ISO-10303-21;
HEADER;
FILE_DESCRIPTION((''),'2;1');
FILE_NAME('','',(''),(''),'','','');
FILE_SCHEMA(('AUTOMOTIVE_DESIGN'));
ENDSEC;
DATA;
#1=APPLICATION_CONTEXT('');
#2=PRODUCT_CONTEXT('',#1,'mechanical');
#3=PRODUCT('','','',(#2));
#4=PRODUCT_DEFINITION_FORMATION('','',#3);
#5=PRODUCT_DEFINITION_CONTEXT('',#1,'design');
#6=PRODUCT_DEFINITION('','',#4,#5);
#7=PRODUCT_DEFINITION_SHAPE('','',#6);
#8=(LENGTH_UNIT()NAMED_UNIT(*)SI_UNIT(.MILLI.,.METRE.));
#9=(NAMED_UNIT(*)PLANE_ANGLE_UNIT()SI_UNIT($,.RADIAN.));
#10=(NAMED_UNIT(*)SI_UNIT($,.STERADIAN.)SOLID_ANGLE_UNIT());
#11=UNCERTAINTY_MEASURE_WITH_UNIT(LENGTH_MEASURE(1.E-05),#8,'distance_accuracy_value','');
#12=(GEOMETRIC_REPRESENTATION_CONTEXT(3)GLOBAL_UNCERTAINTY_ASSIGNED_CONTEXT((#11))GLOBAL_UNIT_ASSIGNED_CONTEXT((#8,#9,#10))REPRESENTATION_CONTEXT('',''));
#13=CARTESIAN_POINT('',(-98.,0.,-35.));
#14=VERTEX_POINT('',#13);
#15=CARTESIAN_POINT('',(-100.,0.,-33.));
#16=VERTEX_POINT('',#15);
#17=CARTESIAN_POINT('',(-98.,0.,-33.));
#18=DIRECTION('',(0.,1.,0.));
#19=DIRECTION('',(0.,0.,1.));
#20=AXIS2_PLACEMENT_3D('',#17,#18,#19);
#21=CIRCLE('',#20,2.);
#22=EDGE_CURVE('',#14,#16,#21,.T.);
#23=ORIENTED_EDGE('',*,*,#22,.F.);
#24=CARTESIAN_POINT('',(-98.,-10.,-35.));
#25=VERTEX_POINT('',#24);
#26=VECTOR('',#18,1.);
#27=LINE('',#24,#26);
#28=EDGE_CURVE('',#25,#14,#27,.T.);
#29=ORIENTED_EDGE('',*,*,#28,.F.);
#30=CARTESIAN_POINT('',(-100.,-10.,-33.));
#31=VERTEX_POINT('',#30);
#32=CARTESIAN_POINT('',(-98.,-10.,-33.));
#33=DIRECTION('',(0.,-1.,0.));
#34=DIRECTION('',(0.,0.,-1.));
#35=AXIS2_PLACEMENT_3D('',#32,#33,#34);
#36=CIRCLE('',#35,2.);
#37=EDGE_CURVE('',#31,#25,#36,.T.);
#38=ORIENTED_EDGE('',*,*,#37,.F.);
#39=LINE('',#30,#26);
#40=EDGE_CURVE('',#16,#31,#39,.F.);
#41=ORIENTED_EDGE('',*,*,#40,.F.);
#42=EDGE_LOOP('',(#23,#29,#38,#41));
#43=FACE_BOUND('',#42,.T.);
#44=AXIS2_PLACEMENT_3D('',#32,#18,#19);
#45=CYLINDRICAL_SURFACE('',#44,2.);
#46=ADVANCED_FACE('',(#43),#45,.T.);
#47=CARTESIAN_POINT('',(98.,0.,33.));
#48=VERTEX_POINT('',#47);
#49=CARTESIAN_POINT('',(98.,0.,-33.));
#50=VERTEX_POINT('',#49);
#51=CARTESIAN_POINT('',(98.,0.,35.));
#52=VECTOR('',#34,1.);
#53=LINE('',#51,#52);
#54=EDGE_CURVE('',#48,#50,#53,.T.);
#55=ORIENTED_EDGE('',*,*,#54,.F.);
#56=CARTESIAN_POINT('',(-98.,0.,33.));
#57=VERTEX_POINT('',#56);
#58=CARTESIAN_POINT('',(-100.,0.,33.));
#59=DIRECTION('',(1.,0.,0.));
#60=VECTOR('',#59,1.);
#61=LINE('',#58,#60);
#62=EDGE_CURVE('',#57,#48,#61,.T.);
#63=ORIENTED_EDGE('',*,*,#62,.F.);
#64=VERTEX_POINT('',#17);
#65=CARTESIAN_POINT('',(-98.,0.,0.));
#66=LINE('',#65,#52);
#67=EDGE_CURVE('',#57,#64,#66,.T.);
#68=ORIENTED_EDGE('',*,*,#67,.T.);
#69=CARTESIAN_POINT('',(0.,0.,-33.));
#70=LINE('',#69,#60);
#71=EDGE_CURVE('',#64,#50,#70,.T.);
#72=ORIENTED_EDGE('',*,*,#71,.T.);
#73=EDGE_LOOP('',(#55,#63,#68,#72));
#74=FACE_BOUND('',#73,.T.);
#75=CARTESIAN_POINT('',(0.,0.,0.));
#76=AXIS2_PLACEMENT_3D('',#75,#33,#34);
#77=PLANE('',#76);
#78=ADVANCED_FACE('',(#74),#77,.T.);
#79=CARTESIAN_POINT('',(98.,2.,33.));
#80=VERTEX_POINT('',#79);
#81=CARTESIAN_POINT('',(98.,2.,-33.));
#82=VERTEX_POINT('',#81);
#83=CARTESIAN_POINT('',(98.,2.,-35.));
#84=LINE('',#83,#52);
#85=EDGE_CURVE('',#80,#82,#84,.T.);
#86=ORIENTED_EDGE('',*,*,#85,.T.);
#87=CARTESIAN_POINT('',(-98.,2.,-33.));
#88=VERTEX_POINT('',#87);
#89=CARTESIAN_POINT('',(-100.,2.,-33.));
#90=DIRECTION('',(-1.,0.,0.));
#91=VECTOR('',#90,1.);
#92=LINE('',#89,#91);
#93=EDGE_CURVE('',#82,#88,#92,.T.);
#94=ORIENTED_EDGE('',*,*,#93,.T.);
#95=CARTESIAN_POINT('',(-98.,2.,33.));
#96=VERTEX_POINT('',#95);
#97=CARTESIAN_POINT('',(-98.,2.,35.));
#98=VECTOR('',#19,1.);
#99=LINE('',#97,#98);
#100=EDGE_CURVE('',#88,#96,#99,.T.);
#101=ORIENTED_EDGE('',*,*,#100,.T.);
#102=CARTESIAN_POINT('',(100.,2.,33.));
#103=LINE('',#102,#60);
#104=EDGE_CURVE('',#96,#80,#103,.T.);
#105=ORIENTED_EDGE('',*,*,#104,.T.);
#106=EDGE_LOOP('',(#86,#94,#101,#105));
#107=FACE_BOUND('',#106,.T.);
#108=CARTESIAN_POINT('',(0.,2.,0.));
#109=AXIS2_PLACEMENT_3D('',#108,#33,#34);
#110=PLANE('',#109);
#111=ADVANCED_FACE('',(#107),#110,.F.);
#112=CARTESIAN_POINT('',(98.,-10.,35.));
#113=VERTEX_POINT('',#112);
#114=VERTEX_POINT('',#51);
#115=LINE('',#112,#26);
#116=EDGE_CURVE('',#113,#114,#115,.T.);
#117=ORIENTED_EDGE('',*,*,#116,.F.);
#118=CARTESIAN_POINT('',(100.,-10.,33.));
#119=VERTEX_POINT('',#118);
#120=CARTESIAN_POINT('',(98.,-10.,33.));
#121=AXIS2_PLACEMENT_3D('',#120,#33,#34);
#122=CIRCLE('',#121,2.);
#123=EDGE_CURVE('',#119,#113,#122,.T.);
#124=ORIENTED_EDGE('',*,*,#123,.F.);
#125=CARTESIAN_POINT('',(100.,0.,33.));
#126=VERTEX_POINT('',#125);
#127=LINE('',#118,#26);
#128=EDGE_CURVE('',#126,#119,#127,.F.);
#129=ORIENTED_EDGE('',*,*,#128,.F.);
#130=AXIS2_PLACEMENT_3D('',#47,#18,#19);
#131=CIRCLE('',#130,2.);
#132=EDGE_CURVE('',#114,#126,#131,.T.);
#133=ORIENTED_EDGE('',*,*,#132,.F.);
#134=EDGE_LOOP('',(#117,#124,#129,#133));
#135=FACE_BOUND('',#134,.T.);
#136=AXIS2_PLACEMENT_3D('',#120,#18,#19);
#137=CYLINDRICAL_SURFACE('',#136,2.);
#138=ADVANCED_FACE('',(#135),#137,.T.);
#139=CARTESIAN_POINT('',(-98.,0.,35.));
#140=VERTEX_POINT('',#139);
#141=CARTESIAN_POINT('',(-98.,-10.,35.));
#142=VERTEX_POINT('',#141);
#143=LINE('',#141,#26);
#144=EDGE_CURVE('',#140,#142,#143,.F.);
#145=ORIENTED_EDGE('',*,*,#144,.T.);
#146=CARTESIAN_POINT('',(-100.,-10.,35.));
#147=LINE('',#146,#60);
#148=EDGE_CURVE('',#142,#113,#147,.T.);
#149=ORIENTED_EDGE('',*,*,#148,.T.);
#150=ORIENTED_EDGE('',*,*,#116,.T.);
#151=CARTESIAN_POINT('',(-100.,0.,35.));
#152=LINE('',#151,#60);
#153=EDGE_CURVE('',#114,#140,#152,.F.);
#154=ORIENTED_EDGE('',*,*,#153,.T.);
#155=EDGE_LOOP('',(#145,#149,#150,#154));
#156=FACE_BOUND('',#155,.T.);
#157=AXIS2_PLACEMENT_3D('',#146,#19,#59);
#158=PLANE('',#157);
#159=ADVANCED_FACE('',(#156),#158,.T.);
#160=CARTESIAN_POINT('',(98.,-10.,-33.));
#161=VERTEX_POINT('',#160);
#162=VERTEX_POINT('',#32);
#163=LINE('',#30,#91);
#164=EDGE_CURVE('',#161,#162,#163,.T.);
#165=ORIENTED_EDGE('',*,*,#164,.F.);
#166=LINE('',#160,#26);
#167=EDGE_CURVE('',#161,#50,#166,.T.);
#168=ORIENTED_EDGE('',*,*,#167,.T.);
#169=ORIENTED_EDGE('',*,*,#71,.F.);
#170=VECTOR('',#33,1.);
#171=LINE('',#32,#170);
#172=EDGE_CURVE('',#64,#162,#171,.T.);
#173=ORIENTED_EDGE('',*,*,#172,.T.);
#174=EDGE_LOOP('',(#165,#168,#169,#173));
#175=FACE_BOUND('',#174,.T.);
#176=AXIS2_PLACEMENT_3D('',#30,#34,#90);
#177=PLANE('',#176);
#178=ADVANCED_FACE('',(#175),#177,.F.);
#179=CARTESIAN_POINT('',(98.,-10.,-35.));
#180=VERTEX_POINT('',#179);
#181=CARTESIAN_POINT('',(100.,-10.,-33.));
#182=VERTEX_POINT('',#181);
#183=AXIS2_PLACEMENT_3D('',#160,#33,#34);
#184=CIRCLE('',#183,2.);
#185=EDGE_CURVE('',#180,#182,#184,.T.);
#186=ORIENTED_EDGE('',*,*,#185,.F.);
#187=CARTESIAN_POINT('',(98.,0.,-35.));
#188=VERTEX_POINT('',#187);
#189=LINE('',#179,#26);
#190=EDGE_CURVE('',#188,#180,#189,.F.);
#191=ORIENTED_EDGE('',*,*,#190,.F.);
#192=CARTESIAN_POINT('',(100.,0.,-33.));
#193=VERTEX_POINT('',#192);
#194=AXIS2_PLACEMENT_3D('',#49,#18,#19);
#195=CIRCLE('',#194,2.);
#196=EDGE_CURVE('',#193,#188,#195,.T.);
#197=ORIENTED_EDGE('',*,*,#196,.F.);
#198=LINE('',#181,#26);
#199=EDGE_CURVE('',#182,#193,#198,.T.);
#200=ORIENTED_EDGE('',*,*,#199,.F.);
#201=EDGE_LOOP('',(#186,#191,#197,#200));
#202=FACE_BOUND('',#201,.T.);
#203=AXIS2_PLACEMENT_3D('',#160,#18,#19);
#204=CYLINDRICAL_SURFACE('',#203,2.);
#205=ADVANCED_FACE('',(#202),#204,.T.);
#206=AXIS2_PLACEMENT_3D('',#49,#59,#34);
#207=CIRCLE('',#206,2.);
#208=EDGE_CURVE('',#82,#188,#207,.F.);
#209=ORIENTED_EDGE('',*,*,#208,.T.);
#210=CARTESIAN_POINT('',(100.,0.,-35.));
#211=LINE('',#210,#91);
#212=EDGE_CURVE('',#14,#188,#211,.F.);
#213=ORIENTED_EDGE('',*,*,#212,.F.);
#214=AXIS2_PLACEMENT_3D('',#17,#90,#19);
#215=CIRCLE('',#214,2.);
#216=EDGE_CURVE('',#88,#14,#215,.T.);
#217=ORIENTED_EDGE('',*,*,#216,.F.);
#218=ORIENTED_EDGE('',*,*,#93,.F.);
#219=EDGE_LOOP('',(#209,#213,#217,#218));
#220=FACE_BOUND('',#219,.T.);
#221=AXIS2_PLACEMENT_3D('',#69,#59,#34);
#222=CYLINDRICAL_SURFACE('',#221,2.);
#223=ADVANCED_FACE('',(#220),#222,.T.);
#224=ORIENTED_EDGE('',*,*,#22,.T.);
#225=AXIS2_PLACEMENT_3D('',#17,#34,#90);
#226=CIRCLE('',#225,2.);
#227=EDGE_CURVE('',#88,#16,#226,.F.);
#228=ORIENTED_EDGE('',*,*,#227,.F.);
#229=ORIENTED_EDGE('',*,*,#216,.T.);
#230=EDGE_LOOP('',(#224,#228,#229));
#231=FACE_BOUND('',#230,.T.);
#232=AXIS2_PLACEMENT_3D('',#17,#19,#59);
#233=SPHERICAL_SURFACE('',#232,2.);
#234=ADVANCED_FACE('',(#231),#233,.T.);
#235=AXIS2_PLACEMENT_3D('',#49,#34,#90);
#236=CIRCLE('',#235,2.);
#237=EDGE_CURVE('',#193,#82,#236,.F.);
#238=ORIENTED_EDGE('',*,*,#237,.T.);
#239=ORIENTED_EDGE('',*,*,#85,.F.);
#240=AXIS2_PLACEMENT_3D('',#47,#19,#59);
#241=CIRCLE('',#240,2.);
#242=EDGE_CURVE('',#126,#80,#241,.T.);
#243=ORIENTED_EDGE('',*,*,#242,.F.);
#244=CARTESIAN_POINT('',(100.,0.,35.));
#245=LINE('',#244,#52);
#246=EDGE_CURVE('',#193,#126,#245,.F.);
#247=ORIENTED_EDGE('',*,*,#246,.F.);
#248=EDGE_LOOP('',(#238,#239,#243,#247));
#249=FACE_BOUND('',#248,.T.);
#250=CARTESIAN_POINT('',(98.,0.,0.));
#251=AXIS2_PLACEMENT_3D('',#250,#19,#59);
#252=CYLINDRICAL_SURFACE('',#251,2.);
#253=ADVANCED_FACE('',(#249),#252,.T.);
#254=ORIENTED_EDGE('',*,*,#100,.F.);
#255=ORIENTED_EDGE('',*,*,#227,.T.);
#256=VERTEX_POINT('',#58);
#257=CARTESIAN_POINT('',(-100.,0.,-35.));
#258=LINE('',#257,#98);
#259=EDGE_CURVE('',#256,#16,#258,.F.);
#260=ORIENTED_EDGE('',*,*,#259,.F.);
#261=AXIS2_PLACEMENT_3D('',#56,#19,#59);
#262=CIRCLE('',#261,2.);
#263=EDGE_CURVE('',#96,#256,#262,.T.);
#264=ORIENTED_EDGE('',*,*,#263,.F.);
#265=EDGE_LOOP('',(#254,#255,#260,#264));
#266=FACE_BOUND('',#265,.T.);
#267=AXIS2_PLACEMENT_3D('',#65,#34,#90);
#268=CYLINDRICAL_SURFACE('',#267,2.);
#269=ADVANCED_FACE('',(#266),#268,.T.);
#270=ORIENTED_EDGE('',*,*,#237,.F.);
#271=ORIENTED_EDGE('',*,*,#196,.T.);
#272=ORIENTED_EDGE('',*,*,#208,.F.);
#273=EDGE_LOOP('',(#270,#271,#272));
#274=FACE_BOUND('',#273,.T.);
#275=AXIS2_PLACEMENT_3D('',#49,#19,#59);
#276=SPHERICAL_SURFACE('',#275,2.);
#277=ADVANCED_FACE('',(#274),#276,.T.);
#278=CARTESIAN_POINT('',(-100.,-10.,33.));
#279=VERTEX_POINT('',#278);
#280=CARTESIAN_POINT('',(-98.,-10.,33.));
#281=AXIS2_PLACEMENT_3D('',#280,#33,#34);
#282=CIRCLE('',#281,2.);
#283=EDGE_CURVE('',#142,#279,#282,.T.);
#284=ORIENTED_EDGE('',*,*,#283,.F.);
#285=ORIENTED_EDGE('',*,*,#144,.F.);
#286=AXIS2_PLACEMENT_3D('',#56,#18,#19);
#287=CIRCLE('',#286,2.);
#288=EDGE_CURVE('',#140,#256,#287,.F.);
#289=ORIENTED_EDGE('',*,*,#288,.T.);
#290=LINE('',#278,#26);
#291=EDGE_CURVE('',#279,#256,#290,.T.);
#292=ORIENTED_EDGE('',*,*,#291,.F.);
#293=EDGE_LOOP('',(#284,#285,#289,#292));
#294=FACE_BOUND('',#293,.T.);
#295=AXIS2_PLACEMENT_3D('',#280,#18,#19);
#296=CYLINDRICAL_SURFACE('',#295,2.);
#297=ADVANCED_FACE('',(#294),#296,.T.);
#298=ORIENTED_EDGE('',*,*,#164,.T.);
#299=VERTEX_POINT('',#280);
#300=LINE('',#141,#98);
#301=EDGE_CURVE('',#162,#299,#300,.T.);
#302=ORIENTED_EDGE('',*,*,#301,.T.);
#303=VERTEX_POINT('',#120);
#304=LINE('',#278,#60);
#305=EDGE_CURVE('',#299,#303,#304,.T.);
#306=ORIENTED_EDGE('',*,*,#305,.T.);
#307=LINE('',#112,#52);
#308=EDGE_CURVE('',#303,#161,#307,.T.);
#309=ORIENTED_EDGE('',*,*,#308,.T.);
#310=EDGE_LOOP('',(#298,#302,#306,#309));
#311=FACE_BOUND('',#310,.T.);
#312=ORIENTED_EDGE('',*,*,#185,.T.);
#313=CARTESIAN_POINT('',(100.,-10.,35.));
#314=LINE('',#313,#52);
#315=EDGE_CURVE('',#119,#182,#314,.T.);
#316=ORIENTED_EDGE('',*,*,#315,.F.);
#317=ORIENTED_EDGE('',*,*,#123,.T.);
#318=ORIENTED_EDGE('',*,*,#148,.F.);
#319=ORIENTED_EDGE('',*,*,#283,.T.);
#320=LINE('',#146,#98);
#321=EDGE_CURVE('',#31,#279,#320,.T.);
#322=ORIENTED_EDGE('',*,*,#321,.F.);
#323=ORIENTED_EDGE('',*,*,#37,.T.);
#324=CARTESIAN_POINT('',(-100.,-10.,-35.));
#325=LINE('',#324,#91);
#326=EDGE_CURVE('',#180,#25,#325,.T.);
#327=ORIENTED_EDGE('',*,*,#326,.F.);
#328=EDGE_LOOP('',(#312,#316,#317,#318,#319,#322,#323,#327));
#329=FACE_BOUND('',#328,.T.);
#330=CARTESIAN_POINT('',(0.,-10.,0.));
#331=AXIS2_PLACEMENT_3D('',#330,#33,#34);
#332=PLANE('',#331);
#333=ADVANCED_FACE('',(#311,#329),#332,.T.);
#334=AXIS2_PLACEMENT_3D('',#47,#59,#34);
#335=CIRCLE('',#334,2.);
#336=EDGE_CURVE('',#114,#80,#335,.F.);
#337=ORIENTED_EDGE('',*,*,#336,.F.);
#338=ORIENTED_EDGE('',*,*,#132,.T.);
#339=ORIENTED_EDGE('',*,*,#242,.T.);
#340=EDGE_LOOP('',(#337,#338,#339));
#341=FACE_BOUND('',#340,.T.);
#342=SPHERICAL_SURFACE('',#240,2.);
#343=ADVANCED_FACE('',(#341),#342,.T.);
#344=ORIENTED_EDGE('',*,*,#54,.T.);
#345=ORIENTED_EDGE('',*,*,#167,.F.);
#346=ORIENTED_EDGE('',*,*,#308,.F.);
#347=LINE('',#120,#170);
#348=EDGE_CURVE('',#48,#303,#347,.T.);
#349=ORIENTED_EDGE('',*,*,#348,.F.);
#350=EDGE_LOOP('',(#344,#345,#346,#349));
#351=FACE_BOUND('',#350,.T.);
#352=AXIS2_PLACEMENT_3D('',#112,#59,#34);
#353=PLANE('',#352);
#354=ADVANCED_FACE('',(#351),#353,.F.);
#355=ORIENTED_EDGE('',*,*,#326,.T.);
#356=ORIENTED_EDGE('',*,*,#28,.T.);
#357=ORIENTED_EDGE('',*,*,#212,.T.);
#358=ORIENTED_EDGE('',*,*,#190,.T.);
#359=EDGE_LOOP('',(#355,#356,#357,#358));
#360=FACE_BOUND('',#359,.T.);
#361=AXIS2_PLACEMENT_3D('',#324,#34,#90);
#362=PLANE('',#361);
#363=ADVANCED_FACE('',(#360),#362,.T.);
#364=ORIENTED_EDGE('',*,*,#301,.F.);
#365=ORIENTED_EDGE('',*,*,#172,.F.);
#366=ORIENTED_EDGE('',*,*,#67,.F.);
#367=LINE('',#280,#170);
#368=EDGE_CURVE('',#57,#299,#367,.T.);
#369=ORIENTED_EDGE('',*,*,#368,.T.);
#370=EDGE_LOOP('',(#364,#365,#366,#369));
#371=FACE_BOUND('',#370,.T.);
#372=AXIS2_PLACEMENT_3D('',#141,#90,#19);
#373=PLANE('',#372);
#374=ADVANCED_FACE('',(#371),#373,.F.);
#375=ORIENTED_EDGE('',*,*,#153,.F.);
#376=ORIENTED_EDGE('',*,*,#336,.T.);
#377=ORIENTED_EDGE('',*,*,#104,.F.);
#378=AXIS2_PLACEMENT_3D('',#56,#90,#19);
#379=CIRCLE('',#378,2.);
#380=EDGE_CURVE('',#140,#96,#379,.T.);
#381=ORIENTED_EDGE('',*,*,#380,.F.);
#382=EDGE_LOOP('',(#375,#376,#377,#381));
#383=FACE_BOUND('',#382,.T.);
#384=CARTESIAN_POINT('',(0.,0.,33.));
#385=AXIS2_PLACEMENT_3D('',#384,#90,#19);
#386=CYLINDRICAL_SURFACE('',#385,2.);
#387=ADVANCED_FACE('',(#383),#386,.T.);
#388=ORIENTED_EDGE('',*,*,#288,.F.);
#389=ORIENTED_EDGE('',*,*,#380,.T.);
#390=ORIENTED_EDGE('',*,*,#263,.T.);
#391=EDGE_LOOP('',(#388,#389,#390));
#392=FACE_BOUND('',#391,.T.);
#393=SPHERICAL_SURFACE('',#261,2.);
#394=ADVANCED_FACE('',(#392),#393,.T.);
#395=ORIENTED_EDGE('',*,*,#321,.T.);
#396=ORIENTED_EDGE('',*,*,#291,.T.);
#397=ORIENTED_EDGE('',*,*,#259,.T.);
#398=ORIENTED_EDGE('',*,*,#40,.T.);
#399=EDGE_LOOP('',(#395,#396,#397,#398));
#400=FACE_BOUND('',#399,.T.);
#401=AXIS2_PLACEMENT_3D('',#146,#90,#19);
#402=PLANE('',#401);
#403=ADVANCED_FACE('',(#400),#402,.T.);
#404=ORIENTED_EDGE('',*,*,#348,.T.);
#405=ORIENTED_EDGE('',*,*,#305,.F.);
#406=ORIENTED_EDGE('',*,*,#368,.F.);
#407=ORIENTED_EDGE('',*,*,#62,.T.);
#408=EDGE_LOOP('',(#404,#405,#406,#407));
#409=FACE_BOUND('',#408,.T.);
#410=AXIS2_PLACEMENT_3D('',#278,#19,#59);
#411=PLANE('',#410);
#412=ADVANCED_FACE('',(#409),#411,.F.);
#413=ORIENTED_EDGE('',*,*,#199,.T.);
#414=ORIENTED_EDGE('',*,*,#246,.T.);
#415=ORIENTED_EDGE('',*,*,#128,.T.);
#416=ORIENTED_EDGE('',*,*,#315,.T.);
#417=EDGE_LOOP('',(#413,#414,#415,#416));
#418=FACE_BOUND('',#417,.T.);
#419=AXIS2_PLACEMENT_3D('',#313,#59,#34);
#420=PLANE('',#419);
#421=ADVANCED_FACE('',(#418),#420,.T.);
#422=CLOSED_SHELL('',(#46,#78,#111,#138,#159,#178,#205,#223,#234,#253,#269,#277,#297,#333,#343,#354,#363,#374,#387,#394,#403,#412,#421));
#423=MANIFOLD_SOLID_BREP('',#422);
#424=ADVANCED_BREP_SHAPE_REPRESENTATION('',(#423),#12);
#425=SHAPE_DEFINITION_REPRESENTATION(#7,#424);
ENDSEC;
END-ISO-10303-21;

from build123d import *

# Parameters (mm, degrees)
RECTANGLEBOX_DEPTH      = 2
RECTANGLEBOX_DEPTH_BACK = 10
SKETCHREC_W             = 200
SKETCHREC_H             = 70
RECTANGLER_R            = 2
RECTANGLEC_START        = -98
RECTANGLEC_OUTLINE_W    = 10
RECTANGLEC_OUTLINE_H    = 66
RECTANGLEC_DEPTH        = 196


# Read off the part's stored shape, not the designer's step: RectangleC
with BuildPart() as part:
    # SketchRec → RectangleBox (new, two sides: drawn at the far end of the back side and taken through both)
    with BuildSketch(Plane(origin=(0, 0, 0), x_dir=(1, 0, 0), z_dir=(0, 1, 0)).offset(-RECTANGLEBOX_DEPTH_BACK)):
        Rectangle(SKETCHREC_W, SKETCHREC_H)
    extrude(amount=RECTANGLEBOX_DEPTH + RECTANGLEBOX_DEPTH_BACK)

    # RectangleR
    rectangler_edges = [part.edges().sort_by_distance(p)[0] for p in [
        (100, 2, 0),
        (0, 2, -35),
        (-100, 2, 0),
        (0, 2, 35),
        (100, -4, 35),
        (-100, -4, 35),
        (-100, -4, -35),
        (100, -4, -35),
    ]]
    fillet(rectangler_edges, radius=RECTANGLER_R)

    # RectangleC outline → RectangleC (cut)
    with BuildSketch(Plane.YZ.offset(RECTANGLEC_START)):
        with Locations((-5, 0)):
            Rectangle(RECTANGLEC_OUTLINE_W, RECTANGLEC_OUTLINE_H)
    extrude(amount=RECTANGLEC_DEPTH, mode=Mode.SUBTRACT)


solid = part.part
